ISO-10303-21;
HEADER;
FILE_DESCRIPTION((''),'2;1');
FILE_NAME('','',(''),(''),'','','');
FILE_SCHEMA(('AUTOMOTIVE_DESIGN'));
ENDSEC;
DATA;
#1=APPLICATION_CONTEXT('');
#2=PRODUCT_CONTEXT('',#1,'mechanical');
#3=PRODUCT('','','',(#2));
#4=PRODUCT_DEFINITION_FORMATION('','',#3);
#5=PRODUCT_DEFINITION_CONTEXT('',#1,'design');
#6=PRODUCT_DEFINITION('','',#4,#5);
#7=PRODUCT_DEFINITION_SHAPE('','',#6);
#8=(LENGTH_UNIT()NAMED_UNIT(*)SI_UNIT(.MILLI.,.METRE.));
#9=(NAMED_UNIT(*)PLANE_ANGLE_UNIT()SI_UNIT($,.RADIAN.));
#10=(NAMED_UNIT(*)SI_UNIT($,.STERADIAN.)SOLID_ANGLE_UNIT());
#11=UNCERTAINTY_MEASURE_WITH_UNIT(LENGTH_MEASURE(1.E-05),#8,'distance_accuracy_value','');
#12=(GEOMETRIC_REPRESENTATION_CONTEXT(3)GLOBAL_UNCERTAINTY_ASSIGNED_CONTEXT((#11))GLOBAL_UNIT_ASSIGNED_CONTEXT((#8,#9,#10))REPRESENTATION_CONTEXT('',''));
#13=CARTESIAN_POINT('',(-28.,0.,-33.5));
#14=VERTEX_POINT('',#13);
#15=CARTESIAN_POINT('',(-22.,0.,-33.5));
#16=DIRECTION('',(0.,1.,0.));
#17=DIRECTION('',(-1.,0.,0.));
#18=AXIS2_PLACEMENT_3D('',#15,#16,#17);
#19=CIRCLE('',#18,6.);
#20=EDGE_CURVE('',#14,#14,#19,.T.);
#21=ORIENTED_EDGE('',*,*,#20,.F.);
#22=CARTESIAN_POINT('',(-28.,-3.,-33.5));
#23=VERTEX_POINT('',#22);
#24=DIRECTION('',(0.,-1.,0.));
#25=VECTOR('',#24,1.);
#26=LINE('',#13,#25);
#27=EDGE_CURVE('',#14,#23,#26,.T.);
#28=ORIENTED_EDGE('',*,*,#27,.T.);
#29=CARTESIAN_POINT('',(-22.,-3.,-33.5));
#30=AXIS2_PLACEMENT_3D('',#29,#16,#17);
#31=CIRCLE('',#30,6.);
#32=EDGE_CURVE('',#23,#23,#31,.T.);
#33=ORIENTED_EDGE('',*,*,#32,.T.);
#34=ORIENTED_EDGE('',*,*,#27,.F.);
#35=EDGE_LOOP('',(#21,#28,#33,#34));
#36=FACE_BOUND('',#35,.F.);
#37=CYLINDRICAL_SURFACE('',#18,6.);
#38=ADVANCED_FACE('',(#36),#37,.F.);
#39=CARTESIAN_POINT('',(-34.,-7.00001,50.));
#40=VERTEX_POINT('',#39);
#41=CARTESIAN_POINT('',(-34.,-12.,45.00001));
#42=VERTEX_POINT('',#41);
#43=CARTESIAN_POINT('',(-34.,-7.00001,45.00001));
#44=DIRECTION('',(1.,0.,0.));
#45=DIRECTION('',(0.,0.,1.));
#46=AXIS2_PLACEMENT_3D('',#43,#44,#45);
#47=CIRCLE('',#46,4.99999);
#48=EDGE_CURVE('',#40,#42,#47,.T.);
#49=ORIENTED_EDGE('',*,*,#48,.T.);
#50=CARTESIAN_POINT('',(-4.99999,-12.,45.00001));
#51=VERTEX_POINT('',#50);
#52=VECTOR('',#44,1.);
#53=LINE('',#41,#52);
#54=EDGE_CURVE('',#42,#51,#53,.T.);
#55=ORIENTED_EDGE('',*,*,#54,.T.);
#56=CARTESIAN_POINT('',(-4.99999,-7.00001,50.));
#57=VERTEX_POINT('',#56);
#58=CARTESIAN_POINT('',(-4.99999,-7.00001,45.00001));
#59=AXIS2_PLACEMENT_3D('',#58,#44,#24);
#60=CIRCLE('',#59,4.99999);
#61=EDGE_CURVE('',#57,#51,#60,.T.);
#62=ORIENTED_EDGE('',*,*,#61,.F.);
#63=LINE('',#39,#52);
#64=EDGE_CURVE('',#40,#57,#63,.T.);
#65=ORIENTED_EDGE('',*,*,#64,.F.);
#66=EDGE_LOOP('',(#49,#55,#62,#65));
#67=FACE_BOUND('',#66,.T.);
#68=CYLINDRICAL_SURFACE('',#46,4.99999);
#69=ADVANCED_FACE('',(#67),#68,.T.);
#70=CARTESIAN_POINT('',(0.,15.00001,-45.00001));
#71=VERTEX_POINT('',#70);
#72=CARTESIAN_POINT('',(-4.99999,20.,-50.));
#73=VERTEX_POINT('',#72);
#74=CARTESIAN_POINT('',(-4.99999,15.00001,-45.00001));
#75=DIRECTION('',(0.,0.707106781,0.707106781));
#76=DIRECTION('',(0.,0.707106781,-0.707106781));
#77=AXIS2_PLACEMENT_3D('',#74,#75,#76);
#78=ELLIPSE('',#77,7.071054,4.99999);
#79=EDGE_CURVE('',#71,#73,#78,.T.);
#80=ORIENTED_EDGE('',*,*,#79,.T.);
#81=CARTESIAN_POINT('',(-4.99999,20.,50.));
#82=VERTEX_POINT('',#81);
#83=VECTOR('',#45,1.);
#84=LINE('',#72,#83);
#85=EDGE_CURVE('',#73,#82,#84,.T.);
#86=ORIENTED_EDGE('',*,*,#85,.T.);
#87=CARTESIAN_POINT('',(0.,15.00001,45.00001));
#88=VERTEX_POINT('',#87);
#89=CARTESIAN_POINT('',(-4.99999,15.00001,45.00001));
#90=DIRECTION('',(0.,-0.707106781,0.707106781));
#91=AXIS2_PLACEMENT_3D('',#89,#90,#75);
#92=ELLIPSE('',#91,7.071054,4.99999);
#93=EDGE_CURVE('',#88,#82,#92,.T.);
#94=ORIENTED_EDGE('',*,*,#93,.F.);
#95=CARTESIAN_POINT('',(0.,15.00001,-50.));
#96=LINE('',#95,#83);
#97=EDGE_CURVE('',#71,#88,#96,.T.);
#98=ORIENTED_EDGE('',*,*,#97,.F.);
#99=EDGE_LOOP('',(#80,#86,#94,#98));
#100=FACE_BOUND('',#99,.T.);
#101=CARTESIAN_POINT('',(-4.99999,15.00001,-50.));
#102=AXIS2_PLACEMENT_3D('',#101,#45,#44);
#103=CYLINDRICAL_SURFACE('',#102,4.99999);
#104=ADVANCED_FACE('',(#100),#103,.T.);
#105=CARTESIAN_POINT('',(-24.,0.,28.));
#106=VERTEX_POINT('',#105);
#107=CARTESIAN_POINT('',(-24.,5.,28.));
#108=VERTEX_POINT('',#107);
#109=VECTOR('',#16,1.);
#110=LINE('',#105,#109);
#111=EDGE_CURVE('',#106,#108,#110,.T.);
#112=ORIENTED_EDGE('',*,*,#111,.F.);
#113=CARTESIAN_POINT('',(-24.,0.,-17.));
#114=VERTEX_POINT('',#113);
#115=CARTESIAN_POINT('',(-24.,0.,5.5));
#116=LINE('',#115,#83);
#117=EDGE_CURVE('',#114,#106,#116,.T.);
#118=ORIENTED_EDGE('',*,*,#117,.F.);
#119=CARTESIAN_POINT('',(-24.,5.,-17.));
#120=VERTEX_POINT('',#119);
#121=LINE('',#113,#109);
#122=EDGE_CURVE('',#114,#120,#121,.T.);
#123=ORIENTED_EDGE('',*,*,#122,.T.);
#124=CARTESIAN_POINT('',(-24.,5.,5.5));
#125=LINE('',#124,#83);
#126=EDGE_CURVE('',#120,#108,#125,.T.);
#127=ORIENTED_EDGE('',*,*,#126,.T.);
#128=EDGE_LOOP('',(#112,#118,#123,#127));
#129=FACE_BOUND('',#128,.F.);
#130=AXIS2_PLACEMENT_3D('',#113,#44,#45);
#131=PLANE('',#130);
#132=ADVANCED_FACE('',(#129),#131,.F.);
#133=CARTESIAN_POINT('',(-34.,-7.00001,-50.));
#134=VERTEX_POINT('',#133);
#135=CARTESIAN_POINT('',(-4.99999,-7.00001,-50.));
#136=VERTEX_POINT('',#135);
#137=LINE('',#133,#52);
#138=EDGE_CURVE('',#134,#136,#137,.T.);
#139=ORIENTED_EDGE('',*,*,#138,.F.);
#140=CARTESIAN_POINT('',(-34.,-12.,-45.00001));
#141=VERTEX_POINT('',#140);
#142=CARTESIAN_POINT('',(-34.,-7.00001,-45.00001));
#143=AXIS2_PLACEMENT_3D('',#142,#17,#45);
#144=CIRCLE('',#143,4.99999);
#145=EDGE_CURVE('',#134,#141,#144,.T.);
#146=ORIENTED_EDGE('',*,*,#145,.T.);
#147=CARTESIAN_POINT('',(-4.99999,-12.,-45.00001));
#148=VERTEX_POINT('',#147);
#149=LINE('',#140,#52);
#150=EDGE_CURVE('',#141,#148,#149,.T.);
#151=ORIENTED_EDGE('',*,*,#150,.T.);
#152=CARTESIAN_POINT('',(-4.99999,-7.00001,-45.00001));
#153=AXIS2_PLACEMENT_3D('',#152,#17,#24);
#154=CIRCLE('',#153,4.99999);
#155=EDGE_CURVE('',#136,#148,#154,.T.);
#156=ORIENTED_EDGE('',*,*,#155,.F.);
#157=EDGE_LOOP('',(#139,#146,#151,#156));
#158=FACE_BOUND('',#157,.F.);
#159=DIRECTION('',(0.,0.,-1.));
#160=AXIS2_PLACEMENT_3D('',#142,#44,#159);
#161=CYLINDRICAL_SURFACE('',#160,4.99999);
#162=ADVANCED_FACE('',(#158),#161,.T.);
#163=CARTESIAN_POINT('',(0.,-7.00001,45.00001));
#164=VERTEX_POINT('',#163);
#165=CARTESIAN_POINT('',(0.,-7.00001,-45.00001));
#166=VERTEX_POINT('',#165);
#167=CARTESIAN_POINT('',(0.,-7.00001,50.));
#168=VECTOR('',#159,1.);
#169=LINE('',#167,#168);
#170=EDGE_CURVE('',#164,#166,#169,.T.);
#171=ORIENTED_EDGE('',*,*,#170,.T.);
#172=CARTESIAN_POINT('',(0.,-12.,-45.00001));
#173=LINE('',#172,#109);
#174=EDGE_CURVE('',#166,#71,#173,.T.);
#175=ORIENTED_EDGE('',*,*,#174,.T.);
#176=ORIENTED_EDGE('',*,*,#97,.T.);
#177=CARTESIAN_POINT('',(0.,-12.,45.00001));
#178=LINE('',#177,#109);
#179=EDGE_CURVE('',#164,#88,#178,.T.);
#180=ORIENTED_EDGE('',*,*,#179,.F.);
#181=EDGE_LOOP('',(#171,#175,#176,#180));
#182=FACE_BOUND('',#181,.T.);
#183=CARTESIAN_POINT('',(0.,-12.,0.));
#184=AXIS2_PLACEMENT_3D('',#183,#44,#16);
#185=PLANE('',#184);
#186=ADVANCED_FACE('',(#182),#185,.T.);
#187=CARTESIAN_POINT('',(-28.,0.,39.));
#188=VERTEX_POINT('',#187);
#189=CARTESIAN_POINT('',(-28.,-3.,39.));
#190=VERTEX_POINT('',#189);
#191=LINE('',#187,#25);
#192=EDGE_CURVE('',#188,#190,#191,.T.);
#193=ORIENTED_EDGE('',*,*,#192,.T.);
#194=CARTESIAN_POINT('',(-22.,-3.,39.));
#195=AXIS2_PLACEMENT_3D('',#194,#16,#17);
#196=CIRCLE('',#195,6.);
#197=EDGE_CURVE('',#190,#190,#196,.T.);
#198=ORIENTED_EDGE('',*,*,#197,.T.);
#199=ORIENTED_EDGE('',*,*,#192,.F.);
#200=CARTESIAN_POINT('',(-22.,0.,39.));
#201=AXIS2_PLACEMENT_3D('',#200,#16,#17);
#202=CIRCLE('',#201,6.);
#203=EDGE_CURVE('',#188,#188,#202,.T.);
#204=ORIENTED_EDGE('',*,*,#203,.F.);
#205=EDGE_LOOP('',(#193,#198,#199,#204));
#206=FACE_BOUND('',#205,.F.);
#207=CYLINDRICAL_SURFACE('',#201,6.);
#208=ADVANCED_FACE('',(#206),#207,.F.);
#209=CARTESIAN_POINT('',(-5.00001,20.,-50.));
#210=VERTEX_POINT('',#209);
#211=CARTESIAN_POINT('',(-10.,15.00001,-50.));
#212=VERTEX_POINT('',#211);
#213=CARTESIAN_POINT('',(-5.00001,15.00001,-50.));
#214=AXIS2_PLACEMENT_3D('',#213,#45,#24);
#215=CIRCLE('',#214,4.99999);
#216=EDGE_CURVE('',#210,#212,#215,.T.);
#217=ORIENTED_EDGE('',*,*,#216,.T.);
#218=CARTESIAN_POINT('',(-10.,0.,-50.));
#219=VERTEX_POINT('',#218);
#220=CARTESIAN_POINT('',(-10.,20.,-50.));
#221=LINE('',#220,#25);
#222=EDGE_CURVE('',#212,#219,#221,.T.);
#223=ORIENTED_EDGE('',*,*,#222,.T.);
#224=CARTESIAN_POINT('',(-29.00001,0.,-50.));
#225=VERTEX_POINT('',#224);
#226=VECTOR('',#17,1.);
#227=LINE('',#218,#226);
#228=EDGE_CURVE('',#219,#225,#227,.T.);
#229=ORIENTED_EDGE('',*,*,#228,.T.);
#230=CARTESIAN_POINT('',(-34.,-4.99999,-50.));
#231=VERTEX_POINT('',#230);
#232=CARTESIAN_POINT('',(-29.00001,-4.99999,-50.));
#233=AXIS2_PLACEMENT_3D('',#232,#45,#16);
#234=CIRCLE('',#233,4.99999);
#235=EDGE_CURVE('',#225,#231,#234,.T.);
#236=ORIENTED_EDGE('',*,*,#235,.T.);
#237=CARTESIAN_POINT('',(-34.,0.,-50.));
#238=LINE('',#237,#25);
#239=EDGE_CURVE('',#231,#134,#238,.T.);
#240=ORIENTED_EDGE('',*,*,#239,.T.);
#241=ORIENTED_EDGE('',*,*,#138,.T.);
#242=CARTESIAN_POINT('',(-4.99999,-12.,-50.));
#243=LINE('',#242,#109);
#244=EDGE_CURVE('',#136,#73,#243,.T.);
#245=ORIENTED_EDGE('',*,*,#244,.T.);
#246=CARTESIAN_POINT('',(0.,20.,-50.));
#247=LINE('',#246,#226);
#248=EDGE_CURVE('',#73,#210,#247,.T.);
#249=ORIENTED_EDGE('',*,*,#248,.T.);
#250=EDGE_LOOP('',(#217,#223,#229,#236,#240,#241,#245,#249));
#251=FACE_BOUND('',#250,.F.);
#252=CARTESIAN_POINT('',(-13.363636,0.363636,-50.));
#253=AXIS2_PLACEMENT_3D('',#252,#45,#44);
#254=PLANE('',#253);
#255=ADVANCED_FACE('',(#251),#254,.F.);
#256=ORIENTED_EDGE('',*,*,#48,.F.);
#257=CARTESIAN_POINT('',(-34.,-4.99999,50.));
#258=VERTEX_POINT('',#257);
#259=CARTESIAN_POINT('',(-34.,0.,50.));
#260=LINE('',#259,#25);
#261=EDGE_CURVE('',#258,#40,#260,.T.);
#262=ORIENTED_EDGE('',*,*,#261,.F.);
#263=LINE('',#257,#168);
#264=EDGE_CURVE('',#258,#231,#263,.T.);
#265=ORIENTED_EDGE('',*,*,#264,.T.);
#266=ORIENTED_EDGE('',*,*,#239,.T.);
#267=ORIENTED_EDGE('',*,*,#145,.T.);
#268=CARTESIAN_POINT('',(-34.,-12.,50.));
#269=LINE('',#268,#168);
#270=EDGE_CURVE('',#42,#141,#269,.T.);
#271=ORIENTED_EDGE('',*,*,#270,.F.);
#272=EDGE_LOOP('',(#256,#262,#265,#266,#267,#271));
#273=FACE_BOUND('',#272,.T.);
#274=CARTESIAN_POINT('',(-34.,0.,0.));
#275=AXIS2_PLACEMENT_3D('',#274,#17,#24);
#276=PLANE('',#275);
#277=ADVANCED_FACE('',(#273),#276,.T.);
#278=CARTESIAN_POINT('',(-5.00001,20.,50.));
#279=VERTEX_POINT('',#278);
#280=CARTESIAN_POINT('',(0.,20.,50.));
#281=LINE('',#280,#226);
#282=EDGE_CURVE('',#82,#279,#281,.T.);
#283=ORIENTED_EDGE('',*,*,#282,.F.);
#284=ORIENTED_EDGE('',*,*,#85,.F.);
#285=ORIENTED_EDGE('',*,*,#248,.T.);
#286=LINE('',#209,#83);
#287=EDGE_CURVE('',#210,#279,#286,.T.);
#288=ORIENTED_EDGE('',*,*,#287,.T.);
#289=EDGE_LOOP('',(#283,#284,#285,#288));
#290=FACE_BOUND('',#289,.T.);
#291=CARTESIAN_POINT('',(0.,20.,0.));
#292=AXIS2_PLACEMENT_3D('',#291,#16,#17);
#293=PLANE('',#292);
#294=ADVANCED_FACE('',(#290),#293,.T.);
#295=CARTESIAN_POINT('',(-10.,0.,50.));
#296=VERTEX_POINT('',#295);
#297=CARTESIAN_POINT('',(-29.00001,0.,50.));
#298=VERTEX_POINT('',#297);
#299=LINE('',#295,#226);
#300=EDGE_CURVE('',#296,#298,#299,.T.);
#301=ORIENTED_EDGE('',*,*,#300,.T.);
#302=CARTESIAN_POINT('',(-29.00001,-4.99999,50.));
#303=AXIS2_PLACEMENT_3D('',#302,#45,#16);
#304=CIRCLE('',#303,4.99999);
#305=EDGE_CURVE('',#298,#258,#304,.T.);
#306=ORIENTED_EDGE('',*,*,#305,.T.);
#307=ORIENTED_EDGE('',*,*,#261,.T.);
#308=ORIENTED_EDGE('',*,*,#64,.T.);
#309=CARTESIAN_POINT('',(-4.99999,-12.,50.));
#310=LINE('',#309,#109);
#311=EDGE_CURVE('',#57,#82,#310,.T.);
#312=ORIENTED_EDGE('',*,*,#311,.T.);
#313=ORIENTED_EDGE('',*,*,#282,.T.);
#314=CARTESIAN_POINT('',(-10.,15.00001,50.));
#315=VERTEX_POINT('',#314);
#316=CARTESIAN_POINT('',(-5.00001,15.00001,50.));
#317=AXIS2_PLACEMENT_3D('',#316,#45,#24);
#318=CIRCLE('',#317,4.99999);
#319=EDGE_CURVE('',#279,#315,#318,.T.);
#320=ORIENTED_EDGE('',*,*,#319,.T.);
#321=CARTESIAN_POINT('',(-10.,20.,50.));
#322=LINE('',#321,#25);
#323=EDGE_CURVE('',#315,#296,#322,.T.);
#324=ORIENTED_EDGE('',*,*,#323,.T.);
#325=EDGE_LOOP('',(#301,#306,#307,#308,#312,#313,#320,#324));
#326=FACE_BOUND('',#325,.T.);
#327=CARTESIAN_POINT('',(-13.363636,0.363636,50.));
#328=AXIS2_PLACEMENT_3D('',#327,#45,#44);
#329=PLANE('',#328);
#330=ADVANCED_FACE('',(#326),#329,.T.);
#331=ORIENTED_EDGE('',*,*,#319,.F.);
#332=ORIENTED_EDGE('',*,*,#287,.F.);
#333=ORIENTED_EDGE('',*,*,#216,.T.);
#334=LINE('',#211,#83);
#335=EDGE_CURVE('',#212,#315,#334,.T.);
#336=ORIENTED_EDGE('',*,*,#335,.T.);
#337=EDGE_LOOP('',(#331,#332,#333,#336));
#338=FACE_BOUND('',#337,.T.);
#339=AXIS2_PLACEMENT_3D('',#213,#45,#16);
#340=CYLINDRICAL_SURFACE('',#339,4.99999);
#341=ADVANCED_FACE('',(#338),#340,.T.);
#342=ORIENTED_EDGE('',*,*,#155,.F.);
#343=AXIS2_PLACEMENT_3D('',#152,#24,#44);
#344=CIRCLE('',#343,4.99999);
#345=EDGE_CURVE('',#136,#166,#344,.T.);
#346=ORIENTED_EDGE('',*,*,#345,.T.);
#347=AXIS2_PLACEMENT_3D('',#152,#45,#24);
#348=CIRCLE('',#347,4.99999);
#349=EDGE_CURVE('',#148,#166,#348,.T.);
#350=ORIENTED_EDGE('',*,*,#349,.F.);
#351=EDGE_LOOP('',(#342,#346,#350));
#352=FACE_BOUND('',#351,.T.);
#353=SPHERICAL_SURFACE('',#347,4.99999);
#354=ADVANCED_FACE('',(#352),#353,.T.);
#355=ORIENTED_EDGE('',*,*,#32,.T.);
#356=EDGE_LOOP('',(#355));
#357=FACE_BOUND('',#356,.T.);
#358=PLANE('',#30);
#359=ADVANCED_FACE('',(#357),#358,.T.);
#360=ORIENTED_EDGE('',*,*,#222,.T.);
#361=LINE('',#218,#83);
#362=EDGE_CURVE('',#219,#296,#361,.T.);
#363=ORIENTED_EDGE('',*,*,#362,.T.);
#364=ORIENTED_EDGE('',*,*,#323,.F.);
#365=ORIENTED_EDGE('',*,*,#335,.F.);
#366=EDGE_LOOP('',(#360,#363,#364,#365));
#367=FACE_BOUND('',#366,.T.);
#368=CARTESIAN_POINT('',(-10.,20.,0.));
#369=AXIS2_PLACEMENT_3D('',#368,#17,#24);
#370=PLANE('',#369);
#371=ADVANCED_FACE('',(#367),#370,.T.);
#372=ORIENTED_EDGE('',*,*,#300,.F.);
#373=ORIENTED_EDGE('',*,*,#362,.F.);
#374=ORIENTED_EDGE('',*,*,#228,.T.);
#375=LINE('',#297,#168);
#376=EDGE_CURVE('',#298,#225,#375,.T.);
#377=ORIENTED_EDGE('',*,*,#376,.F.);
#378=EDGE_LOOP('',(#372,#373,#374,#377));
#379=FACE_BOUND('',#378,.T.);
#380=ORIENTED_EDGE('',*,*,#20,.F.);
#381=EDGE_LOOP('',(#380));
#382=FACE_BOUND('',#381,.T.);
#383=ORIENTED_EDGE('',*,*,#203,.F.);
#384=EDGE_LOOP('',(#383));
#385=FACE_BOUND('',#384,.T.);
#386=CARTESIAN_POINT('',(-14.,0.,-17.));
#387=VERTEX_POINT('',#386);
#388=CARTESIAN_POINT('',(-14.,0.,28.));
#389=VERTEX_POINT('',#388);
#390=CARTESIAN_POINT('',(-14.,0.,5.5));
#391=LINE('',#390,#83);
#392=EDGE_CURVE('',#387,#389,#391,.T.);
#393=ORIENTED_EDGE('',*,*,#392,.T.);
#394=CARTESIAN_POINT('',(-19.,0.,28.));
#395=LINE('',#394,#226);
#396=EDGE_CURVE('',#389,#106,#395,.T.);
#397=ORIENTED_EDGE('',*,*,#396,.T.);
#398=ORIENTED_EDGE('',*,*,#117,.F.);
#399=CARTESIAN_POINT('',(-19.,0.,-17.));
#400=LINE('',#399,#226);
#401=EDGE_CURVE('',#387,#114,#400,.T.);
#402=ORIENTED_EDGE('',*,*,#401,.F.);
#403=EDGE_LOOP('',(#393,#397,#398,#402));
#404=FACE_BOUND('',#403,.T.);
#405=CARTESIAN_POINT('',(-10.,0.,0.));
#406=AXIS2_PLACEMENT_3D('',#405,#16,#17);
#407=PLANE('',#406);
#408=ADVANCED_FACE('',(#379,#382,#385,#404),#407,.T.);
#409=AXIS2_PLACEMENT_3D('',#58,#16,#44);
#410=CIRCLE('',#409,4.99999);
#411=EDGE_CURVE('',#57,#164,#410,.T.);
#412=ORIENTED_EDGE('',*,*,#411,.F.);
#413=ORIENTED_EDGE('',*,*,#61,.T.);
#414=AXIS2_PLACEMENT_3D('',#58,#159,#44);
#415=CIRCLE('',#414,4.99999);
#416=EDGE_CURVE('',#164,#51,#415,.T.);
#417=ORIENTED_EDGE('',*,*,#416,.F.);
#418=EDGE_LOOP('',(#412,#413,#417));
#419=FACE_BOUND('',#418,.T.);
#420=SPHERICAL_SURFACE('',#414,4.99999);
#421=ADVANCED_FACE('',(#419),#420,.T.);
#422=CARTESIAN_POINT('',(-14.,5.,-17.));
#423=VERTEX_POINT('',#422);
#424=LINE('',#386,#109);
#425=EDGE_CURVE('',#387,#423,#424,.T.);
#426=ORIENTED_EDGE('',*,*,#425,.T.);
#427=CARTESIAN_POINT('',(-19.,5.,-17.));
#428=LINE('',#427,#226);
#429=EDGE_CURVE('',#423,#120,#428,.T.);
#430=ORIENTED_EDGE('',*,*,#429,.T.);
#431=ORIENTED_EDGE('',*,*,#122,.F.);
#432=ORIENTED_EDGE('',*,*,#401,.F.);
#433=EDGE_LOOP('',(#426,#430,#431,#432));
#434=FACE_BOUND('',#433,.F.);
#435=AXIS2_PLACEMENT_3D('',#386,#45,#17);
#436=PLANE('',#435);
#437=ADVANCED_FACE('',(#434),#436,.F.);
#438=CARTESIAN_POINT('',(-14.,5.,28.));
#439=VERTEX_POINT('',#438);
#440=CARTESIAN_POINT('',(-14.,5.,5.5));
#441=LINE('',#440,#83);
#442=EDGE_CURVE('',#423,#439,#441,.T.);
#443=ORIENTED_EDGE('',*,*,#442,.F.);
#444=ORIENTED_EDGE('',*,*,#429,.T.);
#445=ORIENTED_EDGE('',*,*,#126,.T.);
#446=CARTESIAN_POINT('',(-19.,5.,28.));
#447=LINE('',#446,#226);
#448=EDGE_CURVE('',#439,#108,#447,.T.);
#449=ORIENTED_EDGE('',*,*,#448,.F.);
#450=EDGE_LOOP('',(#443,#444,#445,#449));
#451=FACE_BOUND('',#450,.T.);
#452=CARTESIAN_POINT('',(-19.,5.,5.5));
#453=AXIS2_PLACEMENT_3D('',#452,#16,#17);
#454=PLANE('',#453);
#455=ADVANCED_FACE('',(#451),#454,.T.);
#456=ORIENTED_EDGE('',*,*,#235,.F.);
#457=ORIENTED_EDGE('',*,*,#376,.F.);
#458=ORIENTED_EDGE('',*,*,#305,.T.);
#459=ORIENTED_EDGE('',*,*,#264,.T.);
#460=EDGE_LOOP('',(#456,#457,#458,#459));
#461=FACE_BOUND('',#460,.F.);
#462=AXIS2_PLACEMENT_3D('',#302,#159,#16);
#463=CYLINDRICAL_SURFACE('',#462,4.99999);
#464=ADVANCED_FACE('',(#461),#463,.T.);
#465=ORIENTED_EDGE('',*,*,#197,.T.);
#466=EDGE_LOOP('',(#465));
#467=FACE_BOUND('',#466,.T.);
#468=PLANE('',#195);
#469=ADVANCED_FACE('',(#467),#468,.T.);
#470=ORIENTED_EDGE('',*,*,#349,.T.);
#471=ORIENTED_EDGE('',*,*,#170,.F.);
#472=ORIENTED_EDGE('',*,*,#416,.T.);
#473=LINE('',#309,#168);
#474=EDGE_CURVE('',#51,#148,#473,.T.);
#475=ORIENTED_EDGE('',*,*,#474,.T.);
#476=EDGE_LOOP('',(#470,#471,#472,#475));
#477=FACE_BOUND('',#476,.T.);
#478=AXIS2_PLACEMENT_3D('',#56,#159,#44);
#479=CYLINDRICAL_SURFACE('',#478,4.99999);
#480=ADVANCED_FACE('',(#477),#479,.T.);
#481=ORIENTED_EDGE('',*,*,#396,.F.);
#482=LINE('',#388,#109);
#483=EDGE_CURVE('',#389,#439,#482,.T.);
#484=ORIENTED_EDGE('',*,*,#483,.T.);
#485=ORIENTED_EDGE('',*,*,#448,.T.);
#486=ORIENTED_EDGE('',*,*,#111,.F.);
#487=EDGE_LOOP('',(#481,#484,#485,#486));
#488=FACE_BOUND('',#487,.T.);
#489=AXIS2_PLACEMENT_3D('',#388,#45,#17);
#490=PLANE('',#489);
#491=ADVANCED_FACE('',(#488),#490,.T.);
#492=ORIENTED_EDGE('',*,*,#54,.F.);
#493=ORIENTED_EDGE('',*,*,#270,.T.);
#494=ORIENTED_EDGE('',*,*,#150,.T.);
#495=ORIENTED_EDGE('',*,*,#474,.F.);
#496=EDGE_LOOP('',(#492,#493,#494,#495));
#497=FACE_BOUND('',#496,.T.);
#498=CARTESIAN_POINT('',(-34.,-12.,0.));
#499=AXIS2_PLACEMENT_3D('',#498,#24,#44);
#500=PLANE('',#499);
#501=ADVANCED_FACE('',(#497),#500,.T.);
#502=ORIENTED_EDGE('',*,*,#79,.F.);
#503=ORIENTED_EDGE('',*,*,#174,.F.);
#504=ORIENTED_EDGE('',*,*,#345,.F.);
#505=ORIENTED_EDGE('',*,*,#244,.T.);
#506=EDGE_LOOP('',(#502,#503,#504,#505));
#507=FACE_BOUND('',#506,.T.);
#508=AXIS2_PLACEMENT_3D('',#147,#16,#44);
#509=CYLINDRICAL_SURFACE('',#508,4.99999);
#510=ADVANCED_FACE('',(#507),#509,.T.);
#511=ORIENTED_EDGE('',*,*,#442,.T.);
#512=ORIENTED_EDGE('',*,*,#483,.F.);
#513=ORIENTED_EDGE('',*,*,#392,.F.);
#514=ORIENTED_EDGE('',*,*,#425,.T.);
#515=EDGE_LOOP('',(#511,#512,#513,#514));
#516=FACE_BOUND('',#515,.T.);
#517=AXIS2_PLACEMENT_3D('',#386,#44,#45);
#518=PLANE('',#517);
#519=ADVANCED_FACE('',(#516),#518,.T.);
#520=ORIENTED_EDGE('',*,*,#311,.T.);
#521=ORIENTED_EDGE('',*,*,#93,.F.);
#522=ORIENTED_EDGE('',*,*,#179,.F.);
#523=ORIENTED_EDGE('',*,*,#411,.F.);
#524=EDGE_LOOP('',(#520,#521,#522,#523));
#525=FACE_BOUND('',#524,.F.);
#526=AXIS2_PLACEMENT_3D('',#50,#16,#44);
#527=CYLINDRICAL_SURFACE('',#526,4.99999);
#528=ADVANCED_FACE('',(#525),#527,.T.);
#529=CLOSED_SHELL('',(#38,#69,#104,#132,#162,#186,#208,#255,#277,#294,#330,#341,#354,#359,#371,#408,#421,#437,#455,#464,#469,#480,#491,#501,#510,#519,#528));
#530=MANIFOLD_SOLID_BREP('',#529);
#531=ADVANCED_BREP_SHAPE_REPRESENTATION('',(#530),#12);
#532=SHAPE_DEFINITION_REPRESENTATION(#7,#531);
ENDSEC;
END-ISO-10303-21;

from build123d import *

# Parameters (mm, degrees)
F1_DEPTH      = 50
F1_DEPTH_BACK = 50
F2_W          = 10
F2_H          = 45
F3_DEPTH      = 5
F4_R          = 6
F5_DEPTH      = 3
F6_R          = 4.99999


# Not quite as in the source:
# - a fillet or chamfer is up to 0.001 mm smaller than in the source, because OpenCascade refuses the exact size


with BuildPart() as f1:
    # F0 (on Top) → F1 (new body, two sides)
    with BuildSketch(Plane.XY) as f1_sk:
        Polygon((0, -12), (0, 0), (0, 20), (-10, 20), (-10, 0), (-34, 0), (-34, -12), align=None)
    extrude(amount=F1_DEPTH)
    extrude(f1_sk.sketch, amount=-F1_DEPTH_BACK)

    # F2 (on face) → F3 (join)
    with BuildSketch(Plane(origin=(0, 0, 0), x_dir=(-1, 0, 0), z_dir=(0, 1, 0))):
        with Locations((19, 5.5)):
            Rectangle(F2_W, F2_H)
    extrude(amount=F3_DEPTH)

    # F4 (on face) → F5 (cut)
    with BuildSketch(Plane(origin=(0, 0, 0), x_dir=(-1, 0, 0), z_dir=(0, 1, 0))):
        with Locations((22, 39)):
            Circle(F4_R)
        with Locations((22, -33.5)):
            Circle(F4_R)
    extrude(amount=-F5_DEPTH, mode=Mode.SUBTRACT)

    # F6 (radius 5 in the source; OpenCascade refuses exactly that, so slightly less here)
    f6_edges = [f1.edges().sort_by_distance(p)[0] for p in [
        (0, -12, 0),
        (0, 4, 50),
        (-17, -12, 50),
        (-17, -12, -50),
        (0, 4, -50),
        (-10, 20, 0),
        (0, 20, 0),
        (-34, 0, 0),
    ]]
    fillet(f6_edges, radius=F6_R)


solid = f1.part
